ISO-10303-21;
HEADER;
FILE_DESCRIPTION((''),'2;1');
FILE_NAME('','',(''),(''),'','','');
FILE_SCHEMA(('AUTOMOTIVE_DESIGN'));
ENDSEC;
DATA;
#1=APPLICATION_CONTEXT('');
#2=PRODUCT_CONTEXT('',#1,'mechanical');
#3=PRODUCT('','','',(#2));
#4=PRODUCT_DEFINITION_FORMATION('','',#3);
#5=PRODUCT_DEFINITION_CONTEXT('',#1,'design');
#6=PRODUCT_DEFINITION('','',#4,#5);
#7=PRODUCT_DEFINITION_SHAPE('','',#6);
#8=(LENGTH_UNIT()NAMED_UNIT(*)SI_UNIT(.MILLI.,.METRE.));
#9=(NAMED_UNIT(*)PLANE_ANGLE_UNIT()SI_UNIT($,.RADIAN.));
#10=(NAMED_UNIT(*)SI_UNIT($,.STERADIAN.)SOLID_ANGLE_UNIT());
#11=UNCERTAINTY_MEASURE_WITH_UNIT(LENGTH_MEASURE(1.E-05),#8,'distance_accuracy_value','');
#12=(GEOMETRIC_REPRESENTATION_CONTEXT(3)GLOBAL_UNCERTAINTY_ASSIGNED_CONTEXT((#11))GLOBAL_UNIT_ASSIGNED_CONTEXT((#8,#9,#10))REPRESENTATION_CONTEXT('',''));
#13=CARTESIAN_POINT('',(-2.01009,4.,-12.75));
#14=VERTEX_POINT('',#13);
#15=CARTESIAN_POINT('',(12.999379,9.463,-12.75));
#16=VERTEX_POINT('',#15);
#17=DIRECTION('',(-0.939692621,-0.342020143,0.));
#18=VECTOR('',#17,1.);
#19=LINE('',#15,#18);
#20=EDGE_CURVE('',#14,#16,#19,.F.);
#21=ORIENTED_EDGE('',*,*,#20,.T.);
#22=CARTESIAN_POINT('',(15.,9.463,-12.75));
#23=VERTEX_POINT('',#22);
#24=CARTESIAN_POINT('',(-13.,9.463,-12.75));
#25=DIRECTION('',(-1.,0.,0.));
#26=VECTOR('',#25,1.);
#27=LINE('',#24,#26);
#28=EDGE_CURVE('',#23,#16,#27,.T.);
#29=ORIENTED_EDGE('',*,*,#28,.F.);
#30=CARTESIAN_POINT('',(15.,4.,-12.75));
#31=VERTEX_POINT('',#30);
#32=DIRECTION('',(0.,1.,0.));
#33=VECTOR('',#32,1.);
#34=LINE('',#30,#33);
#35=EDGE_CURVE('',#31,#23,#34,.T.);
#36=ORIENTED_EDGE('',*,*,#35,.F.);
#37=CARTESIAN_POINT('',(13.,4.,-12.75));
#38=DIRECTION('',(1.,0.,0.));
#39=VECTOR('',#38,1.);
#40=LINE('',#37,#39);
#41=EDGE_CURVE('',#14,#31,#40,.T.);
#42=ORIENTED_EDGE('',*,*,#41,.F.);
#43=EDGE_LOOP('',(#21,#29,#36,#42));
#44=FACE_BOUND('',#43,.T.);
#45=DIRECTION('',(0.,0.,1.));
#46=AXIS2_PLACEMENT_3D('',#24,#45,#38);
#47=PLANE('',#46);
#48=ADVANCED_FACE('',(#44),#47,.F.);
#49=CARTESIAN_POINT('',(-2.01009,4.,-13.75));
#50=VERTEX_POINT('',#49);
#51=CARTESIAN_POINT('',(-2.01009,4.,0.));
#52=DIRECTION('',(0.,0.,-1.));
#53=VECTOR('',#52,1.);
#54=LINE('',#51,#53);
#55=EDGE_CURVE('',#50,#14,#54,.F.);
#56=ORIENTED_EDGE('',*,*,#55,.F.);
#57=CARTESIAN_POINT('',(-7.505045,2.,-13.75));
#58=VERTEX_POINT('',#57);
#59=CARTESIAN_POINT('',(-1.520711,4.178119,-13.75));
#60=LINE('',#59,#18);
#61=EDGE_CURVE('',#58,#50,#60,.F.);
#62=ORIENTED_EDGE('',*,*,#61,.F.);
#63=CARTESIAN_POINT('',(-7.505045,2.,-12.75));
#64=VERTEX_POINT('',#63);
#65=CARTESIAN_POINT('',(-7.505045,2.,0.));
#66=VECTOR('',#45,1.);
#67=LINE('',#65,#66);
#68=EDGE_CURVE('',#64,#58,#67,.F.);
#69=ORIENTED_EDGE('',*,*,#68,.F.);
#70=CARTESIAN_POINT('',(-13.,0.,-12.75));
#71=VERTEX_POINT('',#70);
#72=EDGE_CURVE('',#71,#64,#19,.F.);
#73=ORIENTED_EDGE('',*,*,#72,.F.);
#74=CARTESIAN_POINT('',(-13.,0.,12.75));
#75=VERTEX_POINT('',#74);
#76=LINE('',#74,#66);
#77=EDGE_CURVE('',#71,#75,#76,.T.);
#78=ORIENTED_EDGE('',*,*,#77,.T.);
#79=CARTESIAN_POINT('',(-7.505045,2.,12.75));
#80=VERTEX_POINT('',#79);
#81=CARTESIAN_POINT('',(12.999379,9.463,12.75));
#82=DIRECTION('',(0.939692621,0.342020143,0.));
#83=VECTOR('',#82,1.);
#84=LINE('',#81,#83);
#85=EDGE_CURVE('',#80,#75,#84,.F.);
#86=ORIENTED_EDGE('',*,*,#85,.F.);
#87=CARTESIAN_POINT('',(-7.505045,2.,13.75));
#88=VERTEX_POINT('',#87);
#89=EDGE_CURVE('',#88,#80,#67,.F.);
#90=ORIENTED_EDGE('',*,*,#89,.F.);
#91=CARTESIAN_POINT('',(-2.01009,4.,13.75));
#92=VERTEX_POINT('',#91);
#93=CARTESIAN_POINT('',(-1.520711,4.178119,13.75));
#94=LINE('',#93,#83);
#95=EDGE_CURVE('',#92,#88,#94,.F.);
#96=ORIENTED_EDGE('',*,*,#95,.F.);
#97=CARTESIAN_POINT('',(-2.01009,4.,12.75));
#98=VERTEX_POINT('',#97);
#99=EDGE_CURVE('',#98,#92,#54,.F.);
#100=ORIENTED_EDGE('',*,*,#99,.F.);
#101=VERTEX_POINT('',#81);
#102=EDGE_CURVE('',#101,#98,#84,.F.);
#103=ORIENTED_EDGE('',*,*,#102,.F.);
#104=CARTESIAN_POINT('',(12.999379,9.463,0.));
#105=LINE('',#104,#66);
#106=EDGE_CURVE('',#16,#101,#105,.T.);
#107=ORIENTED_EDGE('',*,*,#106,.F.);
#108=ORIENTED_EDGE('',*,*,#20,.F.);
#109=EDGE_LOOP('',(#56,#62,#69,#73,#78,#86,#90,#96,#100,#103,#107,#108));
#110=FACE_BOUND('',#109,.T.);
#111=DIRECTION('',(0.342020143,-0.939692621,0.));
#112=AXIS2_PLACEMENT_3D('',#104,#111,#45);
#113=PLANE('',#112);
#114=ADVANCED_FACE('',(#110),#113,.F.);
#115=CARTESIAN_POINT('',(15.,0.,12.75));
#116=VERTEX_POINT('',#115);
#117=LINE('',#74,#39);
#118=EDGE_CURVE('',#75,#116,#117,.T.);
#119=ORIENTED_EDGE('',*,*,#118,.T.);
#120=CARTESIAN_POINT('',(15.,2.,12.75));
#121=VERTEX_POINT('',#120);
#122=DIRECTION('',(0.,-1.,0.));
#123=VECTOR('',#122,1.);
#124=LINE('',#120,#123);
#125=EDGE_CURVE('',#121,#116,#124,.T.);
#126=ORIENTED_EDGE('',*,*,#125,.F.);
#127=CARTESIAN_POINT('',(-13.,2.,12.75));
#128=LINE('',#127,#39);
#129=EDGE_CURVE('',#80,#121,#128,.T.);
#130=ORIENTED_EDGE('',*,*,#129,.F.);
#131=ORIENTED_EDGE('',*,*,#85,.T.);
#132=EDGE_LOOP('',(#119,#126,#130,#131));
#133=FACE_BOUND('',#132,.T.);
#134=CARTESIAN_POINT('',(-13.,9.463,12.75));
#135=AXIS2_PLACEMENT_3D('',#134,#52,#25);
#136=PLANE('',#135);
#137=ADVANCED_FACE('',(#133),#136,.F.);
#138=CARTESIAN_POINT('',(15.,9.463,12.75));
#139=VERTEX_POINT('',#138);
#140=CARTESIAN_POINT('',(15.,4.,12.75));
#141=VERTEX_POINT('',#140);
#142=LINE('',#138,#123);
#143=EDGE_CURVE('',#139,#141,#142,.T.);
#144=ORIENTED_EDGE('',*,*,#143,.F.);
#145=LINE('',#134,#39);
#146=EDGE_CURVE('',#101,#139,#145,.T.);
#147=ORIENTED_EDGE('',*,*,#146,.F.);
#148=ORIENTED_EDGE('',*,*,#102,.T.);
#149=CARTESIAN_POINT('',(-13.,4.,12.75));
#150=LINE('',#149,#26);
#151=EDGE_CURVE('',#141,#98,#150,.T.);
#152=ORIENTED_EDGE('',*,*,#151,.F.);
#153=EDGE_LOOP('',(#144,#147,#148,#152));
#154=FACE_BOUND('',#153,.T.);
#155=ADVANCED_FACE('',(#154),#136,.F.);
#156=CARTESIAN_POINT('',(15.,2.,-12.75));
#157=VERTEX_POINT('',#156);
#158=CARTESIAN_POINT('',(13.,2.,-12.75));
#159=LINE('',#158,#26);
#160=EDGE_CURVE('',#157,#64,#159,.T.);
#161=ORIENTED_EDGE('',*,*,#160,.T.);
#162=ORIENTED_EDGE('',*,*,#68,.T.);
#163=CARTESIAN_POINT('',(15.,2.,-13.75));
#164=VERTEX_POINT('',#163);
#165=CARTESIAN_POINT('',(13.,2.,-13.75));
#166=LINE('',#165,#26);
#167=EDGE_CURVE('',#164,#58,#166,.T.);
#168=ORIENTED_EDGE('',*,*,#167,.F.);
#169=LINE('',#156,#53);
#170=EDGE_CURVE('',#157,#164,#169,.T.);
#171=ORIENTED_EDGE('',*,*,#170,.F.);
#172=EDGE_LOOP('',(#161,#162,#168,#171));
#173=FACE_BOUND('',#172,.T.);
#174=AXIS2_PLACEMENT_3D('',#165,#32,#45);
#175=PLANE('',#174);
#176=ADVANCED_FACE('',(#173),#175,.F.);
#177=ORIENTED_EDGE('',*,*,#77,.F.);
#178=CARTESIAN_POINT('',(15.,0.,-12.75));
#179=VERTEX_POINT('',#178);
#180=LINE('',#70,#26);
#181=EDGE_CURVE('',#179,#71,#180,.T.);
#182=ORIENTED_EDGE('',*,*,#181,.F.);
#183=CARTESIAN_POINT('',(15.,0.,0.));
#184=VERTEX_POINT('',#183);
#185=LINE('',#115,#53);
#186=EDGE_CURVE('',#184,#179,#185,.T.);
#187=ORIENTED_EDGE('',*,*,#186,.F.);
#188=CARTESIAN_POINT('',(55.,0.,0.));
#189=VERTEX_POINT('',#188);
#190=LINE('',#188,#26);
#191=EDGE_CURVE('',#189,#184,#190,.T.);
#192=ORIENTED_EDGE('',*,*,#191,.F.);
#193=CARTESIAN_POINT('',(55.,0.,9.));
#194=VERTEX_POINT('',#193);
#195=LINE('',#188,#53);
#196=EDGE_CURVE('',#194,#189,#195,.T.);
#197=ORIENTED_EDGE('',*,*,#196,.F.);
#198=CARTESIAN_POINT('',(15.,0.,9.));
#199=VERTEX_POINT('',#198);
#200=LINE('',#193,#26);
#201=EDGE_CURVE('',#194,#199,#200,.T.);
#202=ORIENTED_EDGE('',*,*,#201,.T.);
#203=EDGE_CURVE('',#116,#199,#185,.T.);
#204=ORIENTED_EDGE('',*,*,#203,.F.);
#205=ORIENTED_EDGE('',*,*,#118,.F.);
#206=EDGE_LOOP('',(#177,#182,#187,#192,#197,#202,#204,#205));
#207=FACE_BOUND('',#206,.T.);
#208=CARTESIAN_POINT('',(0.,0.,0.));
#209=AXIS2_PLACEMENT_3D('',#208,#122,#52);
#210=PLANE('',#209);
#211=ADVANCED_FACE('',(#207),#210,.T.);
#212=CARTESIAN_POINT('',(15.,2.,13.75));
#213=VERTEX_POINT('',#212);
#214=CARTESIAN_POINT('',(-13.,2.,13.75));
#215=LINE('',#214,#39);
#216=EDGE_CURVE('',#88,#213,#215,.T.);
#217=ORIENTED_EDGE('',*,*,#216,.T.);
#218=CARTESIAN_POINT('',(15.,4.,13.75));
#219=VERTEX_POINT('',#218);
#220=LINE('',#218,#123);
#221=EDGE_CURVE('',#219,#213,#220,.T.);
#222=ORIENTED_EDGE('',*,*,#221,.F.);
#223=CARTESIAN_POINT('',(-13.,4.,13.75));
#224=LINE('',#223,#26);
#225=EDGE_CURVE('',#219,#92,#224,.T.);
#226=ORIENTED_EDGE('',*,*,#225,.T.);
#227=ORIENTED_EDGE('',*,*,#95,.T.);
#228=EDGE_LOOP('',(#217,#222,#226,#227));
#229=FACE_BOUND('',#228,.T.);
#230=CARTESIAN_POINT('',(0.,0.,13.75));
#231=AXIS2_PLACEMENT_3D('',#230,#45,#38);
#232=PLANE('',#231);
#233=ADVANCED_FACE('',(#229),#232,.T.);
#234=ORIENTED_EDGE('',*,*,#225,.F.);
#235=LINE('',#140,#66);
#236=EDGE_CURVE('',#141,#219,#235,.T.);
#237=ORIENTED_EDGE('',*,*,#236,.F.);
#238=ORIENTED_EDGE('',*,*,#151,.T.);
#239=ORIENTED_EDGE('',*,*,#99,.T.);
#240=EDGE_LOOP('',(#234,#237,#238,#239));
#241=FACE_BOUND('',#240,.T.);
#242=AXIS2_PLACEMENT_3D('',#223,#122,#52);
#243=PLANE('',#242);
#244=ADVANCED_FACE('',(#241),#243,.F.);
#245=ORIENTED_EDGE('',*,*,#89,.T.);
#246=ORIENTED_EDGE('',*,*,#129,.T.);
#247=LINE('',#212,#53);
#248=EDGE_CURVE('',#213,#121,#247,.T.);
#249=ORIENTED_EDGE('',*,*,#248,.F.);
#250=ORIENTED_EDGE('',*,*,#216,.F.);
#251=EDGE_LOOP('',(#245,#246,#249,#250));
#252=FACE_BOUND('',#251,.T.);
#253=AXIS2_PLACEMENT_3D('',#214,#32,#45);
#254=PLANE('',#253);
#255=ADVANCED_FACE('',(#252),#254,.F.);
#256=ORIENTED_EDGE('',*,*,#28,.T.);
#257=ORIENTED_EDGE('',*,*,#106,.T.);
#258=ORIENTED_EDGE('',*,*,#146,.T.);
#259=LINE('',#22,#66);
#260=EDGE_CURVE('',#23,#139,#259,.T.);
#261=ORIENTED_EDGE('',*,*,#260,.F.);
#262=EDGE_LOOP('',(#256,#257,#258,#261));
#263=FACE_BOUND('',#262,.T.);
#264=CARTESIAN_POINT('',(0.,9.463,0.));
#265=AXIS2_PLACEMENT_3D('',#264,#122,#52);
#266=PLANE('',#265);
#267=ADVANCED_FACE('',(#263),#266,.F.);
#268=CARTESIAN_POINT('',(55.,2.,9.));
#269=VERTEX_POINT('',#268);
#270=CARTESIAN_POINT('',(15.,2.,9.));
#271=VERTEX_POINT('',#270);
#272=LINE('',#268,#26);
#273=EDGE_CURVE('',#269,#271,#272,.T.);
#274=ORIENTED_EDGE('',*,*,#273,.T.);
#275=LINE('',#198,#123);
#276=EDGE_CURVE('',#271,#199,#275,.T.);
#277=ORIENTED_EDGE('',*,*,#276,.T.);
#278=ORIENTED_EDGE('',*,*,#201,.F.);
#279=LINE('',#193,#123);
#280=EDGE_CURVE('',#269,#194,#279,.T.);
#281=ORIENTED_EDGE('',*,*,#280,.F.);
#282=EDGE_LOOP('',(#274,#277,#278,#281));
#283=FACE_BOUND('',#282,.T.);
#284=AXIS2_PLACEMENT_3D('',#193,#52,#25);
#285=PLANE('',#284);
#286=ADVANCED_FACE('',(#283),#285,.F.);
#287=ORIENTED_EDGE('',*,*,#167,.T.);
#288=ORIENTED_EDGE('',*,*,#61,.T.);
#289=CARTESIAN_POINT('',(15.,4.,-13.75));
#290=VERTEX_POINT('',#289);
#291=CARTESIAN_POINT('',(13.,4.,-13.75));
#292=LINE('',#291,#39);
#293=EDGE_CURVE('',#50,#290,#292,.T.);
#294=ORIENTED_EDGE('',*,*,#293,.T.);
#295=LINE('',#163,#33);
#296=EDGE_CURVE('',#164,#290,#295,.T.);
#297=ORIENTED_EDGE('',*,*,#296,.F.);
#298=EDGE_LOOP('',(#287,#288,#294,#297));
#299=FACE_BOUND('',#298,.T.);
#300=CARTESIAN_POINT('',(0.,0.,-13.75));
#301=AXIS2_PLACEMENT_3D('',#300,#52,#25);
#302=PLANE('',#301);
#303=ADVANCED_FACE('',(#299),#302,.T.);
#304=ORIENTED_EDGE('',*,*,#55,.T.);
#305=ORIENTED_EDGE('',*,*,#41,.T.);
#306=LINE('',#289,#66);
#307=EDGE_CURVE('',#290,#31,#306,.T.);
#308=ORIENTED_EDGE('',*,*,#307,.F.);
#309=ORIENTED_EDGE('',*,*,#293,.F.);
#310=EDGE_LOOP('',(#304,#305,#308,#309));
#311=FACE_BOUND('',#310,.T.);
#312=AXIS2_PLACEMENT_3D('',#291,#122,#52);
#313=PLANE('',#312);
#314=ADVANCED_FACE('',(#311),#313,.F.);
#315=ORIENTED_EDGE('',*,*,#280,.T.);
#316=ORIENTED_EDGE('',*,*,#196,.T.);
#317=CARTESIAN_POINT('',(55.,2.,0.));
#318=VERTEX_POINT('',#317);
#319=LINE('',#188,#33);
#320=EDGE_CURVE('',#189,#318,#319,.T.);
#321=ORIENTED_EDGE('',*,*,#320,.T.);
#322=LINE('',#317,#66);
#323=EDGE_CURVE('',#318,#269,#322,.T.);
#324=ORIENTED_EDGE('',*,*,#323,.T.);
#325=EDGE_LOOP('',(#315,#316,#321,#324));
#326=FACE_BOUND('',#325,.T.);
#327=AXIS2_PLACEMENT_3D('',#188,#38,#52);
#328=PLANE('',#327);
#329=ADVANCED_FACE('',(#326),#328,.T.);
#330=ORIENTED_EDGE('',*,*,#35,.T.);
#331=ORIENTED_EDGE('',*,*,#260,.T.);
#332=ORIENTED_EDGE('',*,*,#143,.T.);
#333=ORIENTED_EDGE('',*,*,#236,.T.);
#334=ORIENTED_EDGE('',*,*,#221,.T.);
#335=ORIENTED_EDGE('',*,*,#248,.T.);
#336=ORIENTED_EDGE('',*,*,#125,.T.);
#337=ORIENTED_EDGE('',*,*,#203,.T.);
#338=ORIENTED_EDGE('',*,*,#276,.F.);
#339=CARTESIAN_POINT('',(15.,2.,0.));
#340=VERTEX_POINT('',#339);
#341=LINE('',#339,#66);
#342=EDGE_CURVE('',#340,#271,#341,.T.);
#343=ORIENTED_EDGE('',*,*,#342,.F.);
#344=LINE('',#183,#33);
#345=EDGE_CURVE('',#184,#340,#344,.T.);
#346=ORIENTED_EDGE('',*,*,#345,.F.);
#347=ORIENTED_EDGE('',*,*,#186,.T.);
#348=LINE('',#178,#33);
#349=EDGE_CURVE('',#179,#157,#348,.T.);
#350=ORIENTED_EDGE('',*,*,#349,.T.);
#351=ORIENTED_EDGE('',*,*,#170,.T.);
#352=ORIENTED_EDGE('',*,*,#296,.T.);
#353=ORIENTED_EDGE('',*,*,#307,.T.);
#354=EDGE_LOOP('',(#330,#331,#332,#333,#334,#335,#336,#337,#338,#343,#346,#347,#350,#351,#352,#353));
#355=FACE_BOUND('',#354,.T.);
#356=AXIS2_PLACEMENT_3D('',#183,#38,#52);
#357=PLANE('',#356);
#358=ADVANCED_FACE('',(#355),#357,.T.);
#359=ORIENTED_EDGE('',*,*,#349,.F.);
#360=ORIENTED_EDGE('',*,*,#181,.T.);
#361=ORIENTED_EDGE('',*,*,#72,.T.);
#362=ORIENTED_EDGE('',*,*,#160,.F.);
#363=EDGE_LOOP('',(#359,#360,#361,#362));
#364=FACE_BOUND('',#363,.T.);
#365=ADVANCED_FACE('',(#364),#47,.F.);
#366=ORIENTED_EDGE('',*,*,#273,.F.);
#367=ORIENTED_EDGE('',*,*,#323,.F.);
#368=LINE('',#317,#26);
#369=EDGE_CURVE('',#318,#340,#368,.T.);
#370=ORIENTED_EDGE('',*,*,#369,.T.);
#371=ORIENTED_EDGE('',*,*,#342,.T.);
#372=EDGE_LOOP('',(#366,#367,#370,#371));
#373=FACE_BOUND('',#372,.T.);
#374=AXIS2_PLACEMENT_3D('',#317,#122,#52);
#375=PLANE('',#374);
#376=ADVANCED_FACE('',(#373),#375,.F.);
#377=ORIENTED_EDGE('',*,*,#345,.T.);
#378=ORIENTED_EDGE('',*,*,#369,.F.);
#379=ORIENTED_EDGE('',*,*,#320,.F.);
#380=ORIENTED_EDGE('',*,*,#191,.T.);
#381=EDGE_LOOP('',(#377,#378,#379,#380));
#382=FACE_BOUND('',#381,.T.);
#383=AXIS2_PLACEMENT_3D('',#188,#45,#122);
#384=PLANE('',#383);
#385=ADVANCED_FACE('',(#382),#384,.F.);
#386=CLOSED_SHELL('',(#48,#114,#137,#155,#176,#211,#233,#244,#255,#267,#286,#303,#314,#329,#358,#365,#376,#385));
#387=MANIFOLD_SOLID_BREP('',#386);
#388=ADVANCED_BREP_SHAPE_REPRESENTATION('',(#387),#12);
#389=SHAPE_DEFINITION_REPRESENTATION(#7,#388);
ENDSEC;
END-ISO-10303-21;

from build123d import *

# Parameters (mm, degrees)
SKETCH1_W           = 26
SKETCH1_H           = 25.5
BOSS_EXTRUDE1_DEPTH = 9.463
SKETCH2_W           = 26
SKETCH2_H           = 2
BOSS_EXTRUDE3_DEPTH = 1
SKETCH3_W           = 26
SKETCH3_H           = 2
BOSS_EXTRUDE4_DEPTH = 1
CHAMFER2_SIZE       = 9.463
CHAMFER2_SIZE_2     = 25.99937882
BOSS_EXTRUDE5_DEPTH = 2
SKETCH5_W           = 9
SKETCH5_H           = 2
BOSS_EXTRUDE6_DEPTH = 40


with BuildPart() as part:
    # Sketch1 → Boss-Extrude1 (new body)
    with BuildSketch(Plane(origin=(0, 0, 0), x_dir=(1, 0, 0), z_dir=(0, 1, 0))):
        Rectangle(SKETCH1_W, SKETCH1_H)
    extrude(amount=BOSS_EXTRUDE1_DEPTH)

    # Sketch2 → Boss-Extrude3 (add)
    with BuildSketch(Plane.XY.offset(12.75)):
        with Locations((0, 3)):
            Rectangle(SKETCH2_W, SKETCH2_H)
    extrude(amount=BOSS_EXTRUDE3_DEPTH)

    # Sketch3 → Boss-Extrude4 (add)
    with BuildSketch(Plane(origin=(0, 0, -12.75), x_dir=(-1, 0, 0), z_dir=(0, 0, -1))):
        with Locations((0, 3)):
            Rectangle(SKETCH3_W, SKETCH3_H)
    extrude(amount=BOSS_EXTRUDE4_DEPTH)

    # Chamfer2
    # the kernel refuses this chamfer: 25.99937882, 9.463 mm, written as the material it takes off along each edge
    with BuildSketch(Plane(origin=(-13, 9.463, -80.197451585), x_dir=(-0.09904090225205063, -0.9950833631817486, 0), z_dir=(0, 0, 1))) as chamfer2_piece_1:
        Polygon((CHAMFER2_SIZE * 0.995083363182, CHAMFER2_SIZE * 0.0990409022521), (-CHAMFER2_SIZE_2 * 0.0990409022532, CHAMFER2_SIZE_2 * 0.995083363193), (0, 0), align=None)
    extrude(amount=160.39490317, mode=Mode.SUBTRACT)

    # Sketch4 → Boss-Extrude5 (add)
    with BuildSketch(Plane(origin=(13, 0, 0), x_dir=(0, 0, -1), z_dir=(1, 0, 0))):
        Polygon((-12.75, 0), (12.75, 0), (12.75, 2), (13.75, 2), (13.75, 4), (12.75, 4), (12.75, 9.463), (-12.75, 9.463), (-12.75, 4), (-13.75, 4), (-13.75, 2), (-12.75, 2), align=None)
    extrude(amount=BOSS_EXTRUDE5_DEPTH)

    # Sketch5 → Boss-Extrude6 (add)
    with BuildSketch(Plane(origin=(15, 0, 0), x_dir=(0, 0, -1), z_dir=(1, 0, 0))):
        with Locations((-4.5, 1)):
            Rectangle(SKETCH5_W, SKETCH5_H)
    extrude(amount=BOSS_EXTRUDE6_DEPTH)


solid = part.part
